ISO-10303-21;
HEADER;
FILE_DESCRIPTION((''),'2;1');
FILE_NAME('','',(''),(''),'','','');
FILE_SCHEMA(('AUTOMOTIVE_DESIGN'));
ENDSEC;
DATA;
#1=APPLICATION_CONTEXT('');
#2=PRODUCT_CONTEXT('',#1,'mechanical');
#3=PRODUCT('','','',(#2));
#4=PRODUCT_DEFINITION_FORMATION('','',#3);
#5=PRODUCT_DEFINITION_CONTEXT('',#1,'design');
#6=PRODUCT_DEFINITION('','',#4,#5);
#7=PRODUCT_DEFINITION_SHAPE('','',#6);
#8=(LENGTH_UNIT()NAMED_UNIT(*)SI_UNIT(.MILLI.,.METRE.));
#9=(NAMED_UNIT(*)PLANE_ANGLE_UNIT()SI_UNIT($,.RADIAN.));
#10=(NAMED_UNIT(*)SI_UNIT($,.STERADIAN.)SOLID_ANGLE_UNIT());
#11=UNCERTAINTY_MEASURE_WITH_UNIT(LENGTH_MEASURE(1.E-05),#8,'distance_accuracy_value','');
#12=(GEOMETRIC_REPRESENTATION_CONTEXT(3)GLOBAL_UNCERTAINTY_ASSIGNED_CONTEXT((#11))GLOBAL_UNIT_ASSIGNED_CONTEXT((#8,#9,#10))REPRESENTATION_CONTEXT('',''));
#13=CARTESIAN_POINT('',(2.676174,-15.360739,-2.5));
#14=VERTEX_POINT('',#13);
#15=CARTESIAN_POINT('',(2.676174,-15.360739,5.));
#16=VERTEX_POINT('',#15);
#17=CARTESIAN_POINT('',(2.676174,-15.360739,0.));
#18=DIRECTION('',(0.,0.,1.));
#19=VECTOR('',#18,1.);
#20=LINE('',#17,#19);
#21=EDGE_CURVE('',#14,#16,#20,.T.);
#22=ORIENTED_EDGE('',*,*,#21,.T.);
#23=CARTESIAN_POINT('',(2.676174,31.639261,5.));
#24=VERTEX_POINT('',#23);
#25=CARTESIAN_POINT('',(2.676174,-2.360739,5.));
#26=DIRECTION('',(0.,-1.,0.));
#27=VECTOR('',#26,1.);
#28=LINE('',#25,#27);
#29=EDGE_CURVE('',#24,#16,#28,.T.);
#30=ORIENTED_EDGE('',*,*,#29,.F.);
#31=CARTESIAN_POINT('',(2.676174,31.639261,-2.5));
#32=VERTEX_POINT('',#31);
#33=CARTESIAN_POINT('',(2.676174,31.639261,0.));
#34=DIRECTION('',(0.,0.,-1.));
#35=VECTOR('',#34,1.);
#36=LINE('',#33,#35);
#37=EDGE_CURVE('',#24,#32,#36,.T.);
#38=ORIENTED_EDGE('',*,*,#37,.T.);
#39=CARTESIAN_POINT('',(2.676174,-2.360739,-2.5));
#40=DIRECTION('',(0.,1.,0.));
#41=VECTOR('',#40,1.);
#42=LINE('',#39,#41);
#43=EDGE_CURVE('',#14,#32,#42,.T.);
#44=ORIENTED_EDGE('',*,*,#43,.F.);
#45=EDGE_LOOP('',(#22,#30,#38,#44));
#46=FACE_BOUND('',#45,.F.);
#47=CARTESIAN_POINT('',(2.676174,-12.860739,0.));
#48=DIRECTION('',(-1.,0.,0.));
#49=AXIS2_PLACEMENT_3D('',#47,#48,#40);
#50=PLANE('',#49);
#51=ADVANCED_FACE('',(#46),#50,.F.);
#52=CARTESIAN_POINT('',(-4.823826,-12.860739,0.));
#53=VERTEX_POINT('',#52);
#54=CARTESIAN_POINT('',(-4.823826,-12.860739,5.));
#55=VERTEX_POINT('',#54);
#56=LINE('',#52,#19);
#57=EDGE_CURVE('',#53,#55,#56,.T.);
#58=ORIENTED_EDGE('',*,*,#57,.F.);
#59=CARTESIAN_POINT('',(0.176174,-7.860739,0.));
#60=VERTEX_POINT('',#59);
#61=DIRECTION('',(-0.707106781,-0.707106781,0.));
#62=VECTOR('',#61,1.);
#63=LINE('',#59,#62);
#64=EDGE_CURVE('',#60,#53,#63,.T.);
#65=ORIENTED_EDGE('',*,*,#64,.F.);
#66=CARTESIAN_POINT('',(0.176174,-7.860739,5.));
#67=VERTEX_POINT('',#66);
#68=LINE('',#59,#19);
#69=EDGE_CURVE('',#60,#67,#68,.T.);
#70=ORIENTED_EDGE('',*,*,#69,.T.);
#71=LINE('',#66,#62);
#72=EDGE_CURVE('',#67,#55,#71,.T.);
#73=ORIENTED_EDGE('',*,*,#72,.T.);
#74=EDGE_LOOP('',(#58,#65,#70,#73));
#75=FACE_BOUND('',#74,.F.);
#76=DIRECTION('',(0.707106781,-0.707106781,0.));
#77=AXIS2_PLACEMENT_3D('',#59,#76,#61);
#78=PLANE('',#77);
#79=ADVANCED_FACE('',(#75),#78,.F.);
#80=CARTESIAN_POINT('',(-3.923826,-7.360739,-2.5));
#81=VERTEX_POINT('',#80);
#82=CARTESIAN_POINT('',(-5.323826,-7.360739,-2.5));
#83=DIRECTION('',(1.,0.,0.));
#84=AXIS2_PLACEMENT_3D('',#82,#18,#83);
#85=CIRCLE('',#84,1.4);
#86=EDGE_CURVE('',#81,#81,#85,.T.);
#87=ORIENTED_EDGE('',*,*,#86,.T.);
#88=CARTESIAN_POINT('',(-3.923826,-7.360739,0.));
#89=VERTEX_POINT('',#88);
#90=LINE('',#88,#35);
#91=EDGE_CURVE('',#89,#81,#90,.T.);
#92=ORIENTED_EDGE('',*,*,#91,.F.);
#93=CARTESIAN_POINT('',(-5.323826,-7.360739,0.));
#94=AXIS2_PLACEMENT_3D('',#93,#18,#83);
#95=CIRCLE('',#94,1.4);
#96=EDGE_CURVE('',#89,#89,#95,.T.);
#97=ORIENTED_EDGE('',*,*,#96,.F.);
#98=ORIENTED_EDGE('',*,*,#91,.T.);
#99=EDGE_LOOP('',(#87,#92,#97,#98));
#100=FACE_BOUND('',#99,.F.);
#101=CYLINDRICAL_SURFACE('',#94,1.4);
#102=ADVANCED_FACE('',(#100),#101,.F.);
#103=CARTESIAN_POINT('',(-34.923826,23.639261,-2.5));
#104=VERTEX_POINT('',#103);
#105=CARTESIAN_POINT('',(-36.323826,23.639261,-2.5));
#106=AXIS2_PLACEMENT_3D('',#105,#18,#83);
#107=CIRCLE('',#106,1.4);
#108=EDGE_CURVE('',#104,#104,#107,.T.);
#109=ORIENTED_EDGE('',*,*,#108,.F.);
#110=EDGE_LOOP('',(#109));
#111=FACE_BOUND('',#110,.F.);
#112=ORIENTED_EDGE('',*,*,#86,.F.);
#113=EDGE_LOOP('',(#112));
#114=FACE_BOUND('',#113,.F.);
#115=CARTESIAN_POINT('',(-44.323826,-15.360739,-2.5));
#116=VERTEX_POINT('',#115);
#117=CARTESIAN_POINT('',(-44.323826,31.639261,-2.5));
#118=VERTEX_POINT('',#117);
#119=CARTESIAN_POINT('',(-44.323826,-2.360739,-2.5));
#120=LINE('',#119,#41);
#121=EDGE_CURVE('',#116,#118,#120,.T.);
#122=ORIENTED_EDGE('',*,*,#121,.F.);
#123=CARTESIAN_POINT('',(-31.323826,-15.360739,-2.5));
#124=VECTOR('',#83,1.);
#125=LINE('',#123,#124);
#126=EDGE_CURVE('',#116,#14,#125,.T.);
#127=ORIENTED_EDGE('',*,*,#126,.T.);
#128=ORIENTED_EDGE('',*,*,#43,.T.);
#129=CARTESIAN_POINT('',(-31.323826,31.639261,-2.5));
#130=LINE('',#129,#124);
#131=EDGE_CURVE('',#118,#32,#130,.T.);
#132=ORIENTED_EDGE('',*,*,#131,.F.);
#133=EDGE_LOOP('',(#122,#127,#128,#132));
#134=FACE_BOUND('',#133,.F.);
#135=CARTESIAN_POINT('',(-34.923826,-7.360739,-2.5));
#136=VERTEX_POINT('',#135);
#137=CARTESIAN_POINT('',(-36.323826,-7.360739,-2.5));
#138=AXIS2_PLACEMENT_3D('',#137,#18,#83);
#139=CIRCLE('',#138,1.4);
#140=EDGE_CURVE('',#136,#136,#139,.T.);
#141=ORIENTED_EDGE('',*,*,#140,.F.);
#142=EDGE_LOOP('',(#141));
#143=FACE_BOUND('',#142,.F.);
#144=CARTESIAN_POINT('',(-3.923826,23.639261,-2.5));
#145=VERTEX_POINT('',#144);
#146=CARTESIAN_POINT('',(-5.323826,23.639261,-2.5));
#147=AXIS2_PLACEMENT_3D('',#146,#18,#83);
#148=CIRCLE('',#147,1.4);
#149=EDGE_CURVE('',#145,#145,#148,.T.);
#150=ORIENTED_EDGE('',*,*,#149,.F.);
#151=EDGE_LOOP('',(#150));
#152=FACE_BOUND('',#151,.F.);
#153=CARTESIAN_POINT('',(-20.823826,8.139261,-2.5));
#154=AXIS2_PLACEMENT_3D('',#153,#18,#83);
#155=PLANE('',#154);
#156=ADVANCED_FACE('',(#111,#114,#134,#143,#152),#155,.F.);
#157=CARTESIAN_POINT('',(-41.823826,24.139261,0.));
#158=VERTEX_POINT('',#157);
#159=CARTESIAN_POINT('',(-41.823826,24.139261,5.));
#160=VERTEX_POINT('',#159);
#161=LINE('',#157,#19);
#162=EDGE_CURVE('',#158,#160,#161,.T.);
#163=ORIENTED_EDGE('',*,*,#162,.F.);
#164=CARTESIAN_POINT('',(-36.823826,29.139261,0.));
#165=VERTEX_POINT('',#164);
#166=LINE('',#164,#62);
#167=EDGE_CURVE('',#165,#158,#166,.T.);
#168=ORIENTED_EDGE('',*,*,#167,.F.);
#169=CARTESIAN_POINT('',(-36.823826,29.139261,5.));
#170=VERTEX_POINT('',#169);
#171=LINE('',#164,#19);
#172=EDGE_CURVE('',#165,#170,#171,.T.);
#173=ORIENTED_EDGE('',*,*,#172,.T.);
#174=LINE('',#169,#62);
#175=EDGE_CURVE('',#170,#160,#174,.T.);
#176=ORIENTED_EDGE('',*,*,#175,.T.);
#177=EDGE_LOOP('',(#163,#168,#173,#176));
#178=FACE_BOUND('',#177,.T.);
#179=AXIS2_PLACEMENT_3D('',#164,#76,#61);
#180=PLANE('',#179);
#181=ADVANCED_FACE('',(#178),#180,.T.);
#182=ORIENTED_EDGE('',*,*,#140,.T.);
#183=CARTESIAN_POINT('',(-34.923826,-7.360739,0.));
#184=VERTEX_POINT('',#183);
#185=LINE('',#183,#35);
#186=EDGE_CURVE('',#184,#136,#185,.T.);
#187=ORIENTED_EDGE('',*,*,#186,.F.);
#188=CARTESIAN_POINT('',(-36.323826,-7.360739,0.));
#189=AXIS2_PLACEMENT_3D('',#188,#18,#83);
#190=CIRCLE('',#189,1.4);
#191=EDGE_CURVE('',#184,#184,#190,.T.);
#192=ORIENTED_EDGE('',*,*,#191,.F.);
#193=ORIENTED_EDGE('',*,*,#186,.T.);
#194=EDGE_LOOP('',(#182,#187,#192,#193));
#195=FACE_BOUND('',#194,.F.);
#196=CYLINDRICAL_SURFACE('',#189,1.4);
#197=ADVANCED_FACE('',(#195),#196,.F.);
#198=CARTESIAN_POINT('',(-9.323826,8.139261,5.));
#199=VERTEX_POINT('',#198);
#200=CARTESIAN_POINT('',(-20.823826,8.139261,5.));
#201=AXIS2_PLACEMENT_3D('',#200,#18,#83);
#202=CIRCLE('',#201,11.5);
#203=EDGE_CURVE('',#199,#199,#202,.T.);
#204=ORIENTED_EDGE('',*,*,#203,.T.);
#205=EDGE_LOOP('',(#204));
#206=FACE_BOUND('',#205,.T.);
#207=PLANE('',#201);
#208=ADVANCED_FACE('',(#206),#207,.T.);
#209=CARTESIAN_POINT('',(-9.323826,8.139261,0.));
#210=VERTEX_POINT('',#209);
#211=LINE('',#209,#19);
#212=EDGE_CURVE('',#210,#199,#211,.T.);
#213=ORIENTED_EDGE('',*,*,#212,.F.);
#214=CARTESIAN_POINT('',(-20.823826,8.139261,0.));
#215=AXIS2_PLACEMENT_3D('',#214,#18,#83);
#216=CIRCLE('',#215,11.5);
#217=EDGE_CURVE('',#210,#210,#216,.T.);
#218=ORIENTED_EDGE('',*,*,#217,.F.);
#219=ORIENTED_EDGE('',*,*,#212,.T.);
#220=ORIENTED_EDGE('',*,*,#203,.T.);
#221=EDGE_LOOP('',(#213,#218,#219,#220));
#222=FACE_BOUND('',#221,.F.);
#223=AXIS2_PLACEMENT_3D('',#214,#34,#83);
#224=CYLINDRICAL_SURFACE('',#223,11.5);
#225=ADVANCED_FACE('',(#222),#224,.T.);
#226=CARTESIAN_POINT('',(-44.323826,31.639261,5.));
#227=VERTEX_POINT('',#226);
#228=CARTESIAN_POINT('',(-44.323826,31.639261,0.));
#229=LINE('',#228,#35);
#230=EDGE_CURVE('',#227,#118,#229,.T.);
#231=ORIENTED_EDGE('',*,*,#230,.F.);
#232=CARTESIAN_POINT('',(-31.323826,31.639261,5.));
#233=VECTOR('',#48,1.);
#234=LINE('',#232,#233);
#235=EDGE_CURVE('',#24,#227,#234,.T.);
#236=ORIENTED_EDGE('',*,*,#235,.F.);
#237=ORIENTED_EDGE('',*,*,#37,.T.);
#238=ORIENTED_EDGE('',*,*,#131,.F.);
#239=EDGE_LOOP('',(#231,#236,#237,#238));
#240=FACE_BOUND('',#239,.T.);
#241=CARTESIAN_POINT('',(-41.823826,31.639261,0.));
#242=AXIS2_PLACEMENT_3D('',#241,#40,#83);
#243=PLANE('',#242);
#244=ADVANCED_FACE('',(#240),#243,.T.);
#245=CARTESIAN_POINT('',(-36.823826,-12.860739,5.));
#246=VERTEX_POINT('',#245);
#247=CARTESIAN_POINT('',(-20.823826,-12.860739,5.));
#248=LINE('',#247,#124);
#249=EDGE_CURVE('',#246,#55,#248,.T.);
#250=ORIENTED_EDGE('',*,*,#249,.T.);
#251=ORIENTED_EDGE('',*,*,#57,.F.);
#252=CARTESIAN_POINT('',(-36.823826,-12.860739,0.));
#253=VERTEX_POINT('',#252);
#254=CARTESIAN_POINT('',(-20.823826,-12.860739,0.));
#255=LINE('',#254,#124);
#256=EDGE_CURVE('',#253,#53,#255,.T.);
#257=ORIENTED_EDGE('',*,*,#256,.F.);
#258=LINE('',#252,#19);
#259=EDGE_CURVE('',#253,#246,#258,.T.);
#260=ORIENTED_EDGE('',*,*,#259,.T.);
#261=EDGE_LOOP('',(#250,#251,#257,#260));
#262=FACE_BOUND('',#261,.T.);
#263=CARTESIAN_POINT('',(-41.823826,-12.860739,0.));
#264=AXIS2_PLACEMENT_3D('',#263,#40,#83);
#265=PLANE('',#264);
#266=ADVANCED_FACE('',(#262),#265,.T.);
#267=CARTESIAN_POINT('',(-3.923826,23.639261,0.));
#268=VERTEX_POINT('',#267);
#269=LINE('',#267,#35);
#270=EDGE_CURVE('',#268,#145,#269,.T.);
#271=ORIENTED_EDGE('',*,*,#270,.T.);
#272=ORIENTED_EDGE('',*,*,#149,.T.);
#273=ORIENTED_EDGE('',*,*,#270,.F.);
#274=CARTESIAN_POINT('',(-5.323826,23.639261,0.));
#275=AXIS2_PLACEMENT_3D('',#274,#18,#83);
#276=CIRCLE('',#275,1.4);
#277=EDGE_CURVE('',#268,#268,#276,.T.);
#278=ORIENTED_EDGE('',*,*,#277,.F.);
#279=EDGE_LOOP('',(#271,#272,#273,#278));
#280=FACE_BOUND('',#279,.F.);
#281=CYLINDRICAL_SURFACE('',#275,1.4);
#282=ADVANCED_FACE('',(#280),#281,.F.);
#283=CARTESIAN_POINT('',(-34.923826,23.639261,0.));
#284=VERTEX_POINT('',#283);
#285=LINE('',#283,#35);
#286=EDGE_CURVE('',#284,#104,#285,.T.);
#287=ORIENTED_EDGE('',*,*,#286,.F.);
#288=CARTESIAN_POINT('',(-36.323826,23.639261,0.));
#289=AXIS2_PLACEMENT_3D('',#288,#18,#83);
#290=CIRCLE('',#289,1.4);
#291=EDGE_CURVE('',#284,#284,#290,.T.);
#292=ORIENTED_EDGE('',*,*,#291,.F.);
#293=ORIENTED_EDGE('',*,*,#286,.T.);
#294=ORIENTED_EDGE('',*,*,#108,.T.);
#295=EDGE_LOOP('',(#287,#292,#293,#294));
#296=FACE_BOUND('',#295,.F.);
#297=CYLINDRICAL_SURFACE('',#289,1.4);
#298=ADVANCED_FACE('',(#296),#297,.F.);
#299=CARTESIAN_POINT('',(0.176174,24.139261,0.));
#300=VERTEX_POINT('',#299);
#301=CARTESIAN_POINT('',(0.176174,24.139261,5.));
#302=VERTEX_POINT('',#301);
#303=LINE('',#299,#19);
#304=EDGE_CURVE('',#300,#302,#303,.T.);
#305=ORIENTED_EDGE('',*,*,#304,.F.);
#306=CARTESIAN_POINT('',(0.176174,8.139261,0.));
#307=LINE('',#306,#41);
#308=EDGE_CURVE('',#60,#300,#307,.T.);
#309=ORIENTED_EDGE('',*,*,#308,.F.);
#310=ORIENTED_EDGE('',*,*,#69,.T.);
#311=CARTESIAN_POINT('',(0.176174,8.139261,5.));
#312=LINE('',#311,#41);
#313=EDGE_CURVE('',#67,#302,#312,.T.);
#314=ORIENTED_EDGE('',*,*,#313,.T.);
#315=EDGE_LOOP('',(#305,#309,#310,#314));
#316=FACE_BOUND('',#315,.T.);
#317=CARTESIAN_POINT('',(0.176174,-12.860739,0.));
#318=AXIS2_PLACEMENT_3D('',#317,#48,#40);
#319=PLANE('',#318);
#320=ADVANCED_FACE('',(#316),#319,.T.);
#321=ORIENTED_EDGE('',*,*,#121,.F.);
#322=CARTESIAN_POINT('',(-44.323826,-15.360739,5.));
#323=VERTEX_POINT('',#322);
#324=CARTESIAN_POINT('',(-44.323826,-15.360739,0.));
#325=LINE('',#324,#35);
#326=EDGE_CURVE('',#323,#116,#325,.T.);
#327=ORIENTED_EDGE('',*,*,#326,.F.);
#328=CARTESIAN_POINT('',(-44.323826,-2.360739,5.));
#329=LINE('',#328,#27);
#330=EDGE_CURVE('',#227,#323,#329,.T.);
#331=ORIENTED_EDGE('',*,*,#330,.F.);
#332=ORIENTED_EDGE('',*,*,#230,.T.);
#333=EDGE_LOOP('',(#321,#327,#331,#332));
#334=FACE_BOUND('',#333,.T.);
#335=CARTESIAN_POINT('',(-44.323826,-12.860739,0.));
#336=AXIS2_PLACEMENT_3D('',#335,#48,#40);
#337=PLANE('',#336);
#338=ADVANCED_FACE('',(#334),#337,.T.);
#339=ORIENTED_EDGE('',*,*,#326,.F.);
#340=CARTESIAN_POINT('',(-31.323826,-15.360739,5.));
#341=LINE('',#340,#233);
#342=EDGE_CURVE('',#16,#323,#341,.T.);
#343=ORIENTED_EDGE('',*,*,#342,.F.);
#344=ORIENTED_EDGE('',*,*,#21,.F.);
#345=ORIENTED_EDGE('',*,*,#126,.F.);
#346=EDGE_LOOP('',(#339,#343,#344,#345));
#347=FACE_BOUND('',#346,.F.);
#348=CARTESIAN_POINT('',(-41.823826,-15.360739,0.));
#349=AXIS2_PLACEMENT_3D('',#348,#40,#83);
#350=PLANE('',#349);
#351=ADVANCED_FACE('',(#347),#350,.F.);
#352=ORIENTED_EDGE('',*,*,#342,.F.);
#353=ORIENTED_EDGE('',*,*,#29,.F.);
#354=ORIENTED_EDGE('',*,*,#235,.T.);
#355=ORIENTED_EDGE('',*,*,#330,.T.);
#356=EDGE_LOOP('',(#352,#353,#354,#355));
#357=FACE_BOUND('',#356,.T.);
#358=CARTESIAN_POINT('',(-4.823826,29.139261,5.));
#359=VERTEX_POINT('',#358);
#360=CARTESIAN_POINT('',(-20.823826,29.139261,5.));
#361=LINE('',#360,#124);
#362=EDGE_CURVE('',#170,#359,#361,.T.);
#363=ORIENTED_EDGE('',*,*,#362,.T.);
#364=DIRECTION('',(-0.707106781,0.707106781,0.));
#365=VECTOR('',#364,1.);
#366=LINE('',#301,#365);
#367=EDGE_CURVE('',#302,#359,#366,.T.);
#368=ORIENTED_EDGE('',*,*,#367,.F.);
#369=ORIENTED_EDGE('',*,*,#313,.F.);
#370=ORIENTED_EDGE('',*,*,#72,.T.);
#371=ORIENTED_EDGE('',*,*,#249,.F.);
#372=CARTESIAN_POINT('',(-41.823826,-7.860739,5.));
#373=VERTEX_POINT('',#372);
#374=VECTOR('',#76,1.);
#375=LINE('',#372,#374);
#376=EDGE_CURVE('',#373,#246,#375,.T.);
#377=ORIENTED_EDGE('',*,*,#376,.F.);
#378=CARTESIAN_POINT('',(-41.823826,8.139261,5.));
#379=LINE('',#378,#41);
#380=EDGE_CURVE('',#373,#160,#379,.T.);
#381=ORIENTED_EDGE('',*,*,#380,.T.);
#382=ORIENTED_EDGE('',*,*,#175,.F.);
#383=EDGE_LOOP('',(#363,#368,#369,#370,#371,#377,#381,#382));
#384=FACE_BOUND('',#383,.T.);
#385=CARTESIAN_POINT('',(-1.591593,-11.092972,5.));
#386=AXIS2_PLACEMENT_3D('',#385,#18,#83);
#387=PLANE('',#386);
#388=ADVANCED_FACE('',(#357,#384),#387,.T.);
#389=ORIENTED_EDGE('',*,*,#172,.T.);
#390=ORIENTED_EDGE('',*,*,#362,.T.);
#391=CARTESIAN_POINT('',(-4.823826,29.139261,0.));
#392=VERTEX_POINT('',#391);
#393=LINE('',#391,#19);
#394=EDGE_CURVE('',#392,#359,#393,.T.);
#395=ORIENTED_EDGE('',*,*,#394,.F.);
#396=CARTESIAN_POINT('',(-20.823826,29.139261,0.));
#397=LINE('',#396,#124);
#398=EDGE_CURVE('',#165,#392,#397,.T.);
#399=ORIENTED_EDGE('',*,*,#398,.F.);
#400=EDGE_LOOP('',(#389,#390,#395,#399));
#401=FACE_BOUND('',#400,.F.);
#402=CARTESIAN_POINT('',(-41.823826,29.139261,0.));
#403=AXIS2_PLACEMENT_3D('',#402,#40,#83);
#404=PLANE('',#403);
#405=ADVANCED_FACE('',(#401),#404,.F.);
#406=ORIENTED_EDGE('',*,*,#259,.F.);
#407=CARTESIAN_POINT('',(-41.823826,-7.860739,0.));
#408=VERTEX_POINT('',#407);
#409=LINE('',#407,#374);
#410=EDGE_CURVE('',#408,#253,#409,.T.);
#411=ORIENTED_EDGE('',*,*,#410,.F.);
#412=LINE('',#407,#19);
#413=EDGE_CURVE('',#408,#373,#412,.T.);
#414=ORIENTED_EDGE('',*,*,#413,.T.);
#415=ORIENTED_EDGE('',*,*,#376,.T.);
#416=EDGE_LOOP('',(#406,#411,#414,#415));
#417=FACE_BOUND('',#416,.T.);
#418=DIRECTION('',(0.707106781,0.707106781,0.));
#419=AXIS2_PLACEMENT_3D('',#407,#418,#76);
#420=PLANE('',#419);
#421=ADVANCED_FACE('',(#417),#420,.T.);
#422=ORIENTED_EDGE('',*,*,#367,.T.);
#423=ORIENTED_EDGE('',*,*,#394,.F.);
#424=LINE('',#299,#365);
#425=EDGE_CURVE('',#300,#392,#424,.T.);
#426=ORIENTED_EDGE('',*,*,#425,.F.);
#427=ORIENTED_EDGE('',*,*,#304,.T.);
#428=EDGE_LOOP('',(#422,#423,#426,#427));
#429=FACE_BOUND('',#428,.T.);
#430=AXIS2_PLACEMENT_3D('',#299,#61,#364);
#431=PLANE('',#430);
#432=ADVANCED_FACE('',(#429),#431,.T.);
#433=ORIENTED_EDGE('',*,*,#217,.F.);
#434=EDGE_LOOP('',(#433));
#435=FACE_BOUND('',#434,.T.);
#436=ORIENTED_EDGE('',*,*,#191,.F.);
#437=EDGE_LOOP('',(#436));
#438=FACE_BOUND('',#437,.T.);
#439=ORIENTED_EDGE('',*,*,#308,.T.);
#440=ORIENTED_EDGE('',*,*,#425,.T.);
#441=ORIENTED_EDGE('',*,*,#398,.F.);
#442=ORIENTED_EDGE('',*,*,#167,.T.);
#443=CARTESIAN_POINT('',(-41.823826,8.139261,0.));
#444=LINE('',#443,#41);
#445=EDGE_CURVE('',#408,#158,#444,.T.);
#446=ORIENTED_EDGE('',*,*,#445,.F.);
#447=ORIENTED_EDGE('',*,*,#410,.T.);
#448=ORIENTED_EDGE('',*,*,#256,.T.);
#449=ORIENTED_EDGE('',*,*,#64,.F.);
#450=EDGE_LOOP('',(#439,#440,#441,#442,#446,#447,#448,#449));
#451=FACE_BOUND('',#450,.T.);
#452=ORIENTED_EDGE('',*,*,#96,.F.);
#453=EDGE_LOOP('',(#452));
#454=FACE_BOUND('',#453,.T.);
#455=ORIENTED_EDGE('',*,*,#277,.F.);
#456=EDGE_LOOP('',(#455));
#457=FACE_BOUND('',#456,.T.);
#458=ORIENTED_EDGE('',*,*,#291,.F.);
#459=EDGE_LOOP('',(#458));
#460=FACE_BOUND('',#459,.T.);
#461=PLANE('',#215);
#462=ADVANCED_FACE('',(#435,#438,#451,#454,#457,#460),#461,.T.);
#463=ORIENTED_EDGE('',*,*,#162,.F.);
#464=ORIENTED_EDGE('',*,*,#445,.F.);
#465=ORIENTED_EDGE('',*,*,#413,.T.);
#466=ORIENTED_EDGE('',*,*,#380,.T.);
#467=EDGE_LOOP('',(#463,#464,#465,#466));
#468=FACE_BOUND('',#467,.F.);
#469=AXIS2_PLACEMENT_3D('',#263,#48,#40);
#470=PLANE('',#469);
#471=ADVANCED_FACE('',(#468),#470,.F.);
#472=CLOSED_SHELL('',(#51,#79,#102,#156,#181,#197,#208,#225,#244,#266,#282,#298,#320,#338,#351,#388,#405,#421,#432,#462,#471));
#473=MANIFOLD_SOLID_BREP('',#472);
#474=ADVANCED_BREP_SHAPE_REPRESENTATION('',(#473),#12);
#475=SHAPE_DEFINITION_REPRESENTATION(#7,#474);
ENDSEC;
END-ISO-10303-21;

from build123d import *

# Parameters (mm, degrees)
F0_W        = 42
F0_H        = 42
F0_R        = 1.4
F0_R_2      = 11.5
F1_DEPTH    = 5
F2_T        = 2.5
F3_T1_DEPTH = 5
F4_DEPTH    = 5
F5_DEPTH    = 25


# Not quite as in the source:
# - a fillet or chamfer that OpenCascade refuses, or shapes differently, is made with other operations: its cross-section is extruded or revolved along the edge and cut away or added


with BuildPart() as f1:
    # F0 (on Top) → F1 (new body)
    with BuildSketch(Plane.XY):
        with Locations((-20.8238260887, 8.1392613277)):
            Rectangle(F0_W, F0_H)
        with Locations((-36.3238260887, -7.3607386723)):
            Circle(F0_R, mode=Mode.SUBTRACT)
        with Locations((-5.3238260887, -7.3607386723)):
            Circle(F0_R, mode=Mode.SUBTRACT)
        with Locations((-36.3238260887, 23.6392613277)):
            Circle(F0_R, mode=Mode.SUBTRACT)
        with Locations((-20.8238260887, 8.1392613277)):
            Circle(F0_R_2, mode=Mode.SUBTRACT)
        with Locations((-5.3238260887, 23.6392613277)):
            Circle(F0_R, mode=Mode.SUBTRACT)
        with Locations((-20.8238260887, 8.1392613277)):
            Circle(F0_R_2)
        with Locations((-36.3238260887, 23.6392613277)):
            Circle(F0_R)
        with Locations((-5.3238260887, 23.6392613277)):
            Circle(F0_R)
        with Locations((-5.3238260887, -7.3607386723)):
            Circle(F0_R)
        with Locations((-36.3238260887, -7.3607386723)):
            Circle(F0_R)
    extrude(amount=F1_DEPTH)

    # F2
    f2_openings = [f1.faces().sort_by_distance(p)[0] for p in [
        (-20.823826, 8.139261, 5),
    ]]
    offset(amount=F2_T, openings=f2_openings, kind=Kind.INTERSECTION)

    # F3: chamfer of 5 on 4 edges, made by hand

    # F3_s2 → F3_t1 (join)
    with BuildSketch(Plane.XY):
        Polygon((0.1761739113, -7.8607386723), (-4.8238260887, -12.8607386723), (0.1761739113, -12.8607386723), align=None)
        Polygon((0.1761739113, 24.1392613277), (-4.8238260887, 29.1392613277), (0.1761739113, 29.1392613277), align=None)
        Polygon((-36.8238260887, 29.1392613277), (-41.8238260887, 24.1392613277), (-41.8238260887, 29.1392613277), align=None)
        Polygon((-41.8238260887, -7.8607386723), (-36.8238260887, -12.8607386723), (-41.8238260887, -12.8607386723), align=None)
    extrude(amount=F3_T1_DEPTH)

    # F0 (on Top) → F4 (join)
    with BuildSketch(Plane.XY):
        with Locations((-20.8238260887, 8.1392613277)):
            Circle(F0_R_2)
    extrude(amount=F4_DEPTH)

    # F0 (on Top) → F5 (cut)
    with BuildSketch(Plane.XY):
        with Locations((-36.3238260887, -7.3607386723)):
            Circle(F0_R)
        with Locations((-36.3238260887, 23.6392613277)):
            Circle(F0_R)
        with Locations((-5.3238260887, 23.6392613277)):
            Circle(F0_R)
        with Locations((-5.3238260887, -7.3607386723)):
            Circle(F0_R)
    extrude(amount=-F5_DEPTH, mode=Mode.SUBTRACT)


solid = f1.part
